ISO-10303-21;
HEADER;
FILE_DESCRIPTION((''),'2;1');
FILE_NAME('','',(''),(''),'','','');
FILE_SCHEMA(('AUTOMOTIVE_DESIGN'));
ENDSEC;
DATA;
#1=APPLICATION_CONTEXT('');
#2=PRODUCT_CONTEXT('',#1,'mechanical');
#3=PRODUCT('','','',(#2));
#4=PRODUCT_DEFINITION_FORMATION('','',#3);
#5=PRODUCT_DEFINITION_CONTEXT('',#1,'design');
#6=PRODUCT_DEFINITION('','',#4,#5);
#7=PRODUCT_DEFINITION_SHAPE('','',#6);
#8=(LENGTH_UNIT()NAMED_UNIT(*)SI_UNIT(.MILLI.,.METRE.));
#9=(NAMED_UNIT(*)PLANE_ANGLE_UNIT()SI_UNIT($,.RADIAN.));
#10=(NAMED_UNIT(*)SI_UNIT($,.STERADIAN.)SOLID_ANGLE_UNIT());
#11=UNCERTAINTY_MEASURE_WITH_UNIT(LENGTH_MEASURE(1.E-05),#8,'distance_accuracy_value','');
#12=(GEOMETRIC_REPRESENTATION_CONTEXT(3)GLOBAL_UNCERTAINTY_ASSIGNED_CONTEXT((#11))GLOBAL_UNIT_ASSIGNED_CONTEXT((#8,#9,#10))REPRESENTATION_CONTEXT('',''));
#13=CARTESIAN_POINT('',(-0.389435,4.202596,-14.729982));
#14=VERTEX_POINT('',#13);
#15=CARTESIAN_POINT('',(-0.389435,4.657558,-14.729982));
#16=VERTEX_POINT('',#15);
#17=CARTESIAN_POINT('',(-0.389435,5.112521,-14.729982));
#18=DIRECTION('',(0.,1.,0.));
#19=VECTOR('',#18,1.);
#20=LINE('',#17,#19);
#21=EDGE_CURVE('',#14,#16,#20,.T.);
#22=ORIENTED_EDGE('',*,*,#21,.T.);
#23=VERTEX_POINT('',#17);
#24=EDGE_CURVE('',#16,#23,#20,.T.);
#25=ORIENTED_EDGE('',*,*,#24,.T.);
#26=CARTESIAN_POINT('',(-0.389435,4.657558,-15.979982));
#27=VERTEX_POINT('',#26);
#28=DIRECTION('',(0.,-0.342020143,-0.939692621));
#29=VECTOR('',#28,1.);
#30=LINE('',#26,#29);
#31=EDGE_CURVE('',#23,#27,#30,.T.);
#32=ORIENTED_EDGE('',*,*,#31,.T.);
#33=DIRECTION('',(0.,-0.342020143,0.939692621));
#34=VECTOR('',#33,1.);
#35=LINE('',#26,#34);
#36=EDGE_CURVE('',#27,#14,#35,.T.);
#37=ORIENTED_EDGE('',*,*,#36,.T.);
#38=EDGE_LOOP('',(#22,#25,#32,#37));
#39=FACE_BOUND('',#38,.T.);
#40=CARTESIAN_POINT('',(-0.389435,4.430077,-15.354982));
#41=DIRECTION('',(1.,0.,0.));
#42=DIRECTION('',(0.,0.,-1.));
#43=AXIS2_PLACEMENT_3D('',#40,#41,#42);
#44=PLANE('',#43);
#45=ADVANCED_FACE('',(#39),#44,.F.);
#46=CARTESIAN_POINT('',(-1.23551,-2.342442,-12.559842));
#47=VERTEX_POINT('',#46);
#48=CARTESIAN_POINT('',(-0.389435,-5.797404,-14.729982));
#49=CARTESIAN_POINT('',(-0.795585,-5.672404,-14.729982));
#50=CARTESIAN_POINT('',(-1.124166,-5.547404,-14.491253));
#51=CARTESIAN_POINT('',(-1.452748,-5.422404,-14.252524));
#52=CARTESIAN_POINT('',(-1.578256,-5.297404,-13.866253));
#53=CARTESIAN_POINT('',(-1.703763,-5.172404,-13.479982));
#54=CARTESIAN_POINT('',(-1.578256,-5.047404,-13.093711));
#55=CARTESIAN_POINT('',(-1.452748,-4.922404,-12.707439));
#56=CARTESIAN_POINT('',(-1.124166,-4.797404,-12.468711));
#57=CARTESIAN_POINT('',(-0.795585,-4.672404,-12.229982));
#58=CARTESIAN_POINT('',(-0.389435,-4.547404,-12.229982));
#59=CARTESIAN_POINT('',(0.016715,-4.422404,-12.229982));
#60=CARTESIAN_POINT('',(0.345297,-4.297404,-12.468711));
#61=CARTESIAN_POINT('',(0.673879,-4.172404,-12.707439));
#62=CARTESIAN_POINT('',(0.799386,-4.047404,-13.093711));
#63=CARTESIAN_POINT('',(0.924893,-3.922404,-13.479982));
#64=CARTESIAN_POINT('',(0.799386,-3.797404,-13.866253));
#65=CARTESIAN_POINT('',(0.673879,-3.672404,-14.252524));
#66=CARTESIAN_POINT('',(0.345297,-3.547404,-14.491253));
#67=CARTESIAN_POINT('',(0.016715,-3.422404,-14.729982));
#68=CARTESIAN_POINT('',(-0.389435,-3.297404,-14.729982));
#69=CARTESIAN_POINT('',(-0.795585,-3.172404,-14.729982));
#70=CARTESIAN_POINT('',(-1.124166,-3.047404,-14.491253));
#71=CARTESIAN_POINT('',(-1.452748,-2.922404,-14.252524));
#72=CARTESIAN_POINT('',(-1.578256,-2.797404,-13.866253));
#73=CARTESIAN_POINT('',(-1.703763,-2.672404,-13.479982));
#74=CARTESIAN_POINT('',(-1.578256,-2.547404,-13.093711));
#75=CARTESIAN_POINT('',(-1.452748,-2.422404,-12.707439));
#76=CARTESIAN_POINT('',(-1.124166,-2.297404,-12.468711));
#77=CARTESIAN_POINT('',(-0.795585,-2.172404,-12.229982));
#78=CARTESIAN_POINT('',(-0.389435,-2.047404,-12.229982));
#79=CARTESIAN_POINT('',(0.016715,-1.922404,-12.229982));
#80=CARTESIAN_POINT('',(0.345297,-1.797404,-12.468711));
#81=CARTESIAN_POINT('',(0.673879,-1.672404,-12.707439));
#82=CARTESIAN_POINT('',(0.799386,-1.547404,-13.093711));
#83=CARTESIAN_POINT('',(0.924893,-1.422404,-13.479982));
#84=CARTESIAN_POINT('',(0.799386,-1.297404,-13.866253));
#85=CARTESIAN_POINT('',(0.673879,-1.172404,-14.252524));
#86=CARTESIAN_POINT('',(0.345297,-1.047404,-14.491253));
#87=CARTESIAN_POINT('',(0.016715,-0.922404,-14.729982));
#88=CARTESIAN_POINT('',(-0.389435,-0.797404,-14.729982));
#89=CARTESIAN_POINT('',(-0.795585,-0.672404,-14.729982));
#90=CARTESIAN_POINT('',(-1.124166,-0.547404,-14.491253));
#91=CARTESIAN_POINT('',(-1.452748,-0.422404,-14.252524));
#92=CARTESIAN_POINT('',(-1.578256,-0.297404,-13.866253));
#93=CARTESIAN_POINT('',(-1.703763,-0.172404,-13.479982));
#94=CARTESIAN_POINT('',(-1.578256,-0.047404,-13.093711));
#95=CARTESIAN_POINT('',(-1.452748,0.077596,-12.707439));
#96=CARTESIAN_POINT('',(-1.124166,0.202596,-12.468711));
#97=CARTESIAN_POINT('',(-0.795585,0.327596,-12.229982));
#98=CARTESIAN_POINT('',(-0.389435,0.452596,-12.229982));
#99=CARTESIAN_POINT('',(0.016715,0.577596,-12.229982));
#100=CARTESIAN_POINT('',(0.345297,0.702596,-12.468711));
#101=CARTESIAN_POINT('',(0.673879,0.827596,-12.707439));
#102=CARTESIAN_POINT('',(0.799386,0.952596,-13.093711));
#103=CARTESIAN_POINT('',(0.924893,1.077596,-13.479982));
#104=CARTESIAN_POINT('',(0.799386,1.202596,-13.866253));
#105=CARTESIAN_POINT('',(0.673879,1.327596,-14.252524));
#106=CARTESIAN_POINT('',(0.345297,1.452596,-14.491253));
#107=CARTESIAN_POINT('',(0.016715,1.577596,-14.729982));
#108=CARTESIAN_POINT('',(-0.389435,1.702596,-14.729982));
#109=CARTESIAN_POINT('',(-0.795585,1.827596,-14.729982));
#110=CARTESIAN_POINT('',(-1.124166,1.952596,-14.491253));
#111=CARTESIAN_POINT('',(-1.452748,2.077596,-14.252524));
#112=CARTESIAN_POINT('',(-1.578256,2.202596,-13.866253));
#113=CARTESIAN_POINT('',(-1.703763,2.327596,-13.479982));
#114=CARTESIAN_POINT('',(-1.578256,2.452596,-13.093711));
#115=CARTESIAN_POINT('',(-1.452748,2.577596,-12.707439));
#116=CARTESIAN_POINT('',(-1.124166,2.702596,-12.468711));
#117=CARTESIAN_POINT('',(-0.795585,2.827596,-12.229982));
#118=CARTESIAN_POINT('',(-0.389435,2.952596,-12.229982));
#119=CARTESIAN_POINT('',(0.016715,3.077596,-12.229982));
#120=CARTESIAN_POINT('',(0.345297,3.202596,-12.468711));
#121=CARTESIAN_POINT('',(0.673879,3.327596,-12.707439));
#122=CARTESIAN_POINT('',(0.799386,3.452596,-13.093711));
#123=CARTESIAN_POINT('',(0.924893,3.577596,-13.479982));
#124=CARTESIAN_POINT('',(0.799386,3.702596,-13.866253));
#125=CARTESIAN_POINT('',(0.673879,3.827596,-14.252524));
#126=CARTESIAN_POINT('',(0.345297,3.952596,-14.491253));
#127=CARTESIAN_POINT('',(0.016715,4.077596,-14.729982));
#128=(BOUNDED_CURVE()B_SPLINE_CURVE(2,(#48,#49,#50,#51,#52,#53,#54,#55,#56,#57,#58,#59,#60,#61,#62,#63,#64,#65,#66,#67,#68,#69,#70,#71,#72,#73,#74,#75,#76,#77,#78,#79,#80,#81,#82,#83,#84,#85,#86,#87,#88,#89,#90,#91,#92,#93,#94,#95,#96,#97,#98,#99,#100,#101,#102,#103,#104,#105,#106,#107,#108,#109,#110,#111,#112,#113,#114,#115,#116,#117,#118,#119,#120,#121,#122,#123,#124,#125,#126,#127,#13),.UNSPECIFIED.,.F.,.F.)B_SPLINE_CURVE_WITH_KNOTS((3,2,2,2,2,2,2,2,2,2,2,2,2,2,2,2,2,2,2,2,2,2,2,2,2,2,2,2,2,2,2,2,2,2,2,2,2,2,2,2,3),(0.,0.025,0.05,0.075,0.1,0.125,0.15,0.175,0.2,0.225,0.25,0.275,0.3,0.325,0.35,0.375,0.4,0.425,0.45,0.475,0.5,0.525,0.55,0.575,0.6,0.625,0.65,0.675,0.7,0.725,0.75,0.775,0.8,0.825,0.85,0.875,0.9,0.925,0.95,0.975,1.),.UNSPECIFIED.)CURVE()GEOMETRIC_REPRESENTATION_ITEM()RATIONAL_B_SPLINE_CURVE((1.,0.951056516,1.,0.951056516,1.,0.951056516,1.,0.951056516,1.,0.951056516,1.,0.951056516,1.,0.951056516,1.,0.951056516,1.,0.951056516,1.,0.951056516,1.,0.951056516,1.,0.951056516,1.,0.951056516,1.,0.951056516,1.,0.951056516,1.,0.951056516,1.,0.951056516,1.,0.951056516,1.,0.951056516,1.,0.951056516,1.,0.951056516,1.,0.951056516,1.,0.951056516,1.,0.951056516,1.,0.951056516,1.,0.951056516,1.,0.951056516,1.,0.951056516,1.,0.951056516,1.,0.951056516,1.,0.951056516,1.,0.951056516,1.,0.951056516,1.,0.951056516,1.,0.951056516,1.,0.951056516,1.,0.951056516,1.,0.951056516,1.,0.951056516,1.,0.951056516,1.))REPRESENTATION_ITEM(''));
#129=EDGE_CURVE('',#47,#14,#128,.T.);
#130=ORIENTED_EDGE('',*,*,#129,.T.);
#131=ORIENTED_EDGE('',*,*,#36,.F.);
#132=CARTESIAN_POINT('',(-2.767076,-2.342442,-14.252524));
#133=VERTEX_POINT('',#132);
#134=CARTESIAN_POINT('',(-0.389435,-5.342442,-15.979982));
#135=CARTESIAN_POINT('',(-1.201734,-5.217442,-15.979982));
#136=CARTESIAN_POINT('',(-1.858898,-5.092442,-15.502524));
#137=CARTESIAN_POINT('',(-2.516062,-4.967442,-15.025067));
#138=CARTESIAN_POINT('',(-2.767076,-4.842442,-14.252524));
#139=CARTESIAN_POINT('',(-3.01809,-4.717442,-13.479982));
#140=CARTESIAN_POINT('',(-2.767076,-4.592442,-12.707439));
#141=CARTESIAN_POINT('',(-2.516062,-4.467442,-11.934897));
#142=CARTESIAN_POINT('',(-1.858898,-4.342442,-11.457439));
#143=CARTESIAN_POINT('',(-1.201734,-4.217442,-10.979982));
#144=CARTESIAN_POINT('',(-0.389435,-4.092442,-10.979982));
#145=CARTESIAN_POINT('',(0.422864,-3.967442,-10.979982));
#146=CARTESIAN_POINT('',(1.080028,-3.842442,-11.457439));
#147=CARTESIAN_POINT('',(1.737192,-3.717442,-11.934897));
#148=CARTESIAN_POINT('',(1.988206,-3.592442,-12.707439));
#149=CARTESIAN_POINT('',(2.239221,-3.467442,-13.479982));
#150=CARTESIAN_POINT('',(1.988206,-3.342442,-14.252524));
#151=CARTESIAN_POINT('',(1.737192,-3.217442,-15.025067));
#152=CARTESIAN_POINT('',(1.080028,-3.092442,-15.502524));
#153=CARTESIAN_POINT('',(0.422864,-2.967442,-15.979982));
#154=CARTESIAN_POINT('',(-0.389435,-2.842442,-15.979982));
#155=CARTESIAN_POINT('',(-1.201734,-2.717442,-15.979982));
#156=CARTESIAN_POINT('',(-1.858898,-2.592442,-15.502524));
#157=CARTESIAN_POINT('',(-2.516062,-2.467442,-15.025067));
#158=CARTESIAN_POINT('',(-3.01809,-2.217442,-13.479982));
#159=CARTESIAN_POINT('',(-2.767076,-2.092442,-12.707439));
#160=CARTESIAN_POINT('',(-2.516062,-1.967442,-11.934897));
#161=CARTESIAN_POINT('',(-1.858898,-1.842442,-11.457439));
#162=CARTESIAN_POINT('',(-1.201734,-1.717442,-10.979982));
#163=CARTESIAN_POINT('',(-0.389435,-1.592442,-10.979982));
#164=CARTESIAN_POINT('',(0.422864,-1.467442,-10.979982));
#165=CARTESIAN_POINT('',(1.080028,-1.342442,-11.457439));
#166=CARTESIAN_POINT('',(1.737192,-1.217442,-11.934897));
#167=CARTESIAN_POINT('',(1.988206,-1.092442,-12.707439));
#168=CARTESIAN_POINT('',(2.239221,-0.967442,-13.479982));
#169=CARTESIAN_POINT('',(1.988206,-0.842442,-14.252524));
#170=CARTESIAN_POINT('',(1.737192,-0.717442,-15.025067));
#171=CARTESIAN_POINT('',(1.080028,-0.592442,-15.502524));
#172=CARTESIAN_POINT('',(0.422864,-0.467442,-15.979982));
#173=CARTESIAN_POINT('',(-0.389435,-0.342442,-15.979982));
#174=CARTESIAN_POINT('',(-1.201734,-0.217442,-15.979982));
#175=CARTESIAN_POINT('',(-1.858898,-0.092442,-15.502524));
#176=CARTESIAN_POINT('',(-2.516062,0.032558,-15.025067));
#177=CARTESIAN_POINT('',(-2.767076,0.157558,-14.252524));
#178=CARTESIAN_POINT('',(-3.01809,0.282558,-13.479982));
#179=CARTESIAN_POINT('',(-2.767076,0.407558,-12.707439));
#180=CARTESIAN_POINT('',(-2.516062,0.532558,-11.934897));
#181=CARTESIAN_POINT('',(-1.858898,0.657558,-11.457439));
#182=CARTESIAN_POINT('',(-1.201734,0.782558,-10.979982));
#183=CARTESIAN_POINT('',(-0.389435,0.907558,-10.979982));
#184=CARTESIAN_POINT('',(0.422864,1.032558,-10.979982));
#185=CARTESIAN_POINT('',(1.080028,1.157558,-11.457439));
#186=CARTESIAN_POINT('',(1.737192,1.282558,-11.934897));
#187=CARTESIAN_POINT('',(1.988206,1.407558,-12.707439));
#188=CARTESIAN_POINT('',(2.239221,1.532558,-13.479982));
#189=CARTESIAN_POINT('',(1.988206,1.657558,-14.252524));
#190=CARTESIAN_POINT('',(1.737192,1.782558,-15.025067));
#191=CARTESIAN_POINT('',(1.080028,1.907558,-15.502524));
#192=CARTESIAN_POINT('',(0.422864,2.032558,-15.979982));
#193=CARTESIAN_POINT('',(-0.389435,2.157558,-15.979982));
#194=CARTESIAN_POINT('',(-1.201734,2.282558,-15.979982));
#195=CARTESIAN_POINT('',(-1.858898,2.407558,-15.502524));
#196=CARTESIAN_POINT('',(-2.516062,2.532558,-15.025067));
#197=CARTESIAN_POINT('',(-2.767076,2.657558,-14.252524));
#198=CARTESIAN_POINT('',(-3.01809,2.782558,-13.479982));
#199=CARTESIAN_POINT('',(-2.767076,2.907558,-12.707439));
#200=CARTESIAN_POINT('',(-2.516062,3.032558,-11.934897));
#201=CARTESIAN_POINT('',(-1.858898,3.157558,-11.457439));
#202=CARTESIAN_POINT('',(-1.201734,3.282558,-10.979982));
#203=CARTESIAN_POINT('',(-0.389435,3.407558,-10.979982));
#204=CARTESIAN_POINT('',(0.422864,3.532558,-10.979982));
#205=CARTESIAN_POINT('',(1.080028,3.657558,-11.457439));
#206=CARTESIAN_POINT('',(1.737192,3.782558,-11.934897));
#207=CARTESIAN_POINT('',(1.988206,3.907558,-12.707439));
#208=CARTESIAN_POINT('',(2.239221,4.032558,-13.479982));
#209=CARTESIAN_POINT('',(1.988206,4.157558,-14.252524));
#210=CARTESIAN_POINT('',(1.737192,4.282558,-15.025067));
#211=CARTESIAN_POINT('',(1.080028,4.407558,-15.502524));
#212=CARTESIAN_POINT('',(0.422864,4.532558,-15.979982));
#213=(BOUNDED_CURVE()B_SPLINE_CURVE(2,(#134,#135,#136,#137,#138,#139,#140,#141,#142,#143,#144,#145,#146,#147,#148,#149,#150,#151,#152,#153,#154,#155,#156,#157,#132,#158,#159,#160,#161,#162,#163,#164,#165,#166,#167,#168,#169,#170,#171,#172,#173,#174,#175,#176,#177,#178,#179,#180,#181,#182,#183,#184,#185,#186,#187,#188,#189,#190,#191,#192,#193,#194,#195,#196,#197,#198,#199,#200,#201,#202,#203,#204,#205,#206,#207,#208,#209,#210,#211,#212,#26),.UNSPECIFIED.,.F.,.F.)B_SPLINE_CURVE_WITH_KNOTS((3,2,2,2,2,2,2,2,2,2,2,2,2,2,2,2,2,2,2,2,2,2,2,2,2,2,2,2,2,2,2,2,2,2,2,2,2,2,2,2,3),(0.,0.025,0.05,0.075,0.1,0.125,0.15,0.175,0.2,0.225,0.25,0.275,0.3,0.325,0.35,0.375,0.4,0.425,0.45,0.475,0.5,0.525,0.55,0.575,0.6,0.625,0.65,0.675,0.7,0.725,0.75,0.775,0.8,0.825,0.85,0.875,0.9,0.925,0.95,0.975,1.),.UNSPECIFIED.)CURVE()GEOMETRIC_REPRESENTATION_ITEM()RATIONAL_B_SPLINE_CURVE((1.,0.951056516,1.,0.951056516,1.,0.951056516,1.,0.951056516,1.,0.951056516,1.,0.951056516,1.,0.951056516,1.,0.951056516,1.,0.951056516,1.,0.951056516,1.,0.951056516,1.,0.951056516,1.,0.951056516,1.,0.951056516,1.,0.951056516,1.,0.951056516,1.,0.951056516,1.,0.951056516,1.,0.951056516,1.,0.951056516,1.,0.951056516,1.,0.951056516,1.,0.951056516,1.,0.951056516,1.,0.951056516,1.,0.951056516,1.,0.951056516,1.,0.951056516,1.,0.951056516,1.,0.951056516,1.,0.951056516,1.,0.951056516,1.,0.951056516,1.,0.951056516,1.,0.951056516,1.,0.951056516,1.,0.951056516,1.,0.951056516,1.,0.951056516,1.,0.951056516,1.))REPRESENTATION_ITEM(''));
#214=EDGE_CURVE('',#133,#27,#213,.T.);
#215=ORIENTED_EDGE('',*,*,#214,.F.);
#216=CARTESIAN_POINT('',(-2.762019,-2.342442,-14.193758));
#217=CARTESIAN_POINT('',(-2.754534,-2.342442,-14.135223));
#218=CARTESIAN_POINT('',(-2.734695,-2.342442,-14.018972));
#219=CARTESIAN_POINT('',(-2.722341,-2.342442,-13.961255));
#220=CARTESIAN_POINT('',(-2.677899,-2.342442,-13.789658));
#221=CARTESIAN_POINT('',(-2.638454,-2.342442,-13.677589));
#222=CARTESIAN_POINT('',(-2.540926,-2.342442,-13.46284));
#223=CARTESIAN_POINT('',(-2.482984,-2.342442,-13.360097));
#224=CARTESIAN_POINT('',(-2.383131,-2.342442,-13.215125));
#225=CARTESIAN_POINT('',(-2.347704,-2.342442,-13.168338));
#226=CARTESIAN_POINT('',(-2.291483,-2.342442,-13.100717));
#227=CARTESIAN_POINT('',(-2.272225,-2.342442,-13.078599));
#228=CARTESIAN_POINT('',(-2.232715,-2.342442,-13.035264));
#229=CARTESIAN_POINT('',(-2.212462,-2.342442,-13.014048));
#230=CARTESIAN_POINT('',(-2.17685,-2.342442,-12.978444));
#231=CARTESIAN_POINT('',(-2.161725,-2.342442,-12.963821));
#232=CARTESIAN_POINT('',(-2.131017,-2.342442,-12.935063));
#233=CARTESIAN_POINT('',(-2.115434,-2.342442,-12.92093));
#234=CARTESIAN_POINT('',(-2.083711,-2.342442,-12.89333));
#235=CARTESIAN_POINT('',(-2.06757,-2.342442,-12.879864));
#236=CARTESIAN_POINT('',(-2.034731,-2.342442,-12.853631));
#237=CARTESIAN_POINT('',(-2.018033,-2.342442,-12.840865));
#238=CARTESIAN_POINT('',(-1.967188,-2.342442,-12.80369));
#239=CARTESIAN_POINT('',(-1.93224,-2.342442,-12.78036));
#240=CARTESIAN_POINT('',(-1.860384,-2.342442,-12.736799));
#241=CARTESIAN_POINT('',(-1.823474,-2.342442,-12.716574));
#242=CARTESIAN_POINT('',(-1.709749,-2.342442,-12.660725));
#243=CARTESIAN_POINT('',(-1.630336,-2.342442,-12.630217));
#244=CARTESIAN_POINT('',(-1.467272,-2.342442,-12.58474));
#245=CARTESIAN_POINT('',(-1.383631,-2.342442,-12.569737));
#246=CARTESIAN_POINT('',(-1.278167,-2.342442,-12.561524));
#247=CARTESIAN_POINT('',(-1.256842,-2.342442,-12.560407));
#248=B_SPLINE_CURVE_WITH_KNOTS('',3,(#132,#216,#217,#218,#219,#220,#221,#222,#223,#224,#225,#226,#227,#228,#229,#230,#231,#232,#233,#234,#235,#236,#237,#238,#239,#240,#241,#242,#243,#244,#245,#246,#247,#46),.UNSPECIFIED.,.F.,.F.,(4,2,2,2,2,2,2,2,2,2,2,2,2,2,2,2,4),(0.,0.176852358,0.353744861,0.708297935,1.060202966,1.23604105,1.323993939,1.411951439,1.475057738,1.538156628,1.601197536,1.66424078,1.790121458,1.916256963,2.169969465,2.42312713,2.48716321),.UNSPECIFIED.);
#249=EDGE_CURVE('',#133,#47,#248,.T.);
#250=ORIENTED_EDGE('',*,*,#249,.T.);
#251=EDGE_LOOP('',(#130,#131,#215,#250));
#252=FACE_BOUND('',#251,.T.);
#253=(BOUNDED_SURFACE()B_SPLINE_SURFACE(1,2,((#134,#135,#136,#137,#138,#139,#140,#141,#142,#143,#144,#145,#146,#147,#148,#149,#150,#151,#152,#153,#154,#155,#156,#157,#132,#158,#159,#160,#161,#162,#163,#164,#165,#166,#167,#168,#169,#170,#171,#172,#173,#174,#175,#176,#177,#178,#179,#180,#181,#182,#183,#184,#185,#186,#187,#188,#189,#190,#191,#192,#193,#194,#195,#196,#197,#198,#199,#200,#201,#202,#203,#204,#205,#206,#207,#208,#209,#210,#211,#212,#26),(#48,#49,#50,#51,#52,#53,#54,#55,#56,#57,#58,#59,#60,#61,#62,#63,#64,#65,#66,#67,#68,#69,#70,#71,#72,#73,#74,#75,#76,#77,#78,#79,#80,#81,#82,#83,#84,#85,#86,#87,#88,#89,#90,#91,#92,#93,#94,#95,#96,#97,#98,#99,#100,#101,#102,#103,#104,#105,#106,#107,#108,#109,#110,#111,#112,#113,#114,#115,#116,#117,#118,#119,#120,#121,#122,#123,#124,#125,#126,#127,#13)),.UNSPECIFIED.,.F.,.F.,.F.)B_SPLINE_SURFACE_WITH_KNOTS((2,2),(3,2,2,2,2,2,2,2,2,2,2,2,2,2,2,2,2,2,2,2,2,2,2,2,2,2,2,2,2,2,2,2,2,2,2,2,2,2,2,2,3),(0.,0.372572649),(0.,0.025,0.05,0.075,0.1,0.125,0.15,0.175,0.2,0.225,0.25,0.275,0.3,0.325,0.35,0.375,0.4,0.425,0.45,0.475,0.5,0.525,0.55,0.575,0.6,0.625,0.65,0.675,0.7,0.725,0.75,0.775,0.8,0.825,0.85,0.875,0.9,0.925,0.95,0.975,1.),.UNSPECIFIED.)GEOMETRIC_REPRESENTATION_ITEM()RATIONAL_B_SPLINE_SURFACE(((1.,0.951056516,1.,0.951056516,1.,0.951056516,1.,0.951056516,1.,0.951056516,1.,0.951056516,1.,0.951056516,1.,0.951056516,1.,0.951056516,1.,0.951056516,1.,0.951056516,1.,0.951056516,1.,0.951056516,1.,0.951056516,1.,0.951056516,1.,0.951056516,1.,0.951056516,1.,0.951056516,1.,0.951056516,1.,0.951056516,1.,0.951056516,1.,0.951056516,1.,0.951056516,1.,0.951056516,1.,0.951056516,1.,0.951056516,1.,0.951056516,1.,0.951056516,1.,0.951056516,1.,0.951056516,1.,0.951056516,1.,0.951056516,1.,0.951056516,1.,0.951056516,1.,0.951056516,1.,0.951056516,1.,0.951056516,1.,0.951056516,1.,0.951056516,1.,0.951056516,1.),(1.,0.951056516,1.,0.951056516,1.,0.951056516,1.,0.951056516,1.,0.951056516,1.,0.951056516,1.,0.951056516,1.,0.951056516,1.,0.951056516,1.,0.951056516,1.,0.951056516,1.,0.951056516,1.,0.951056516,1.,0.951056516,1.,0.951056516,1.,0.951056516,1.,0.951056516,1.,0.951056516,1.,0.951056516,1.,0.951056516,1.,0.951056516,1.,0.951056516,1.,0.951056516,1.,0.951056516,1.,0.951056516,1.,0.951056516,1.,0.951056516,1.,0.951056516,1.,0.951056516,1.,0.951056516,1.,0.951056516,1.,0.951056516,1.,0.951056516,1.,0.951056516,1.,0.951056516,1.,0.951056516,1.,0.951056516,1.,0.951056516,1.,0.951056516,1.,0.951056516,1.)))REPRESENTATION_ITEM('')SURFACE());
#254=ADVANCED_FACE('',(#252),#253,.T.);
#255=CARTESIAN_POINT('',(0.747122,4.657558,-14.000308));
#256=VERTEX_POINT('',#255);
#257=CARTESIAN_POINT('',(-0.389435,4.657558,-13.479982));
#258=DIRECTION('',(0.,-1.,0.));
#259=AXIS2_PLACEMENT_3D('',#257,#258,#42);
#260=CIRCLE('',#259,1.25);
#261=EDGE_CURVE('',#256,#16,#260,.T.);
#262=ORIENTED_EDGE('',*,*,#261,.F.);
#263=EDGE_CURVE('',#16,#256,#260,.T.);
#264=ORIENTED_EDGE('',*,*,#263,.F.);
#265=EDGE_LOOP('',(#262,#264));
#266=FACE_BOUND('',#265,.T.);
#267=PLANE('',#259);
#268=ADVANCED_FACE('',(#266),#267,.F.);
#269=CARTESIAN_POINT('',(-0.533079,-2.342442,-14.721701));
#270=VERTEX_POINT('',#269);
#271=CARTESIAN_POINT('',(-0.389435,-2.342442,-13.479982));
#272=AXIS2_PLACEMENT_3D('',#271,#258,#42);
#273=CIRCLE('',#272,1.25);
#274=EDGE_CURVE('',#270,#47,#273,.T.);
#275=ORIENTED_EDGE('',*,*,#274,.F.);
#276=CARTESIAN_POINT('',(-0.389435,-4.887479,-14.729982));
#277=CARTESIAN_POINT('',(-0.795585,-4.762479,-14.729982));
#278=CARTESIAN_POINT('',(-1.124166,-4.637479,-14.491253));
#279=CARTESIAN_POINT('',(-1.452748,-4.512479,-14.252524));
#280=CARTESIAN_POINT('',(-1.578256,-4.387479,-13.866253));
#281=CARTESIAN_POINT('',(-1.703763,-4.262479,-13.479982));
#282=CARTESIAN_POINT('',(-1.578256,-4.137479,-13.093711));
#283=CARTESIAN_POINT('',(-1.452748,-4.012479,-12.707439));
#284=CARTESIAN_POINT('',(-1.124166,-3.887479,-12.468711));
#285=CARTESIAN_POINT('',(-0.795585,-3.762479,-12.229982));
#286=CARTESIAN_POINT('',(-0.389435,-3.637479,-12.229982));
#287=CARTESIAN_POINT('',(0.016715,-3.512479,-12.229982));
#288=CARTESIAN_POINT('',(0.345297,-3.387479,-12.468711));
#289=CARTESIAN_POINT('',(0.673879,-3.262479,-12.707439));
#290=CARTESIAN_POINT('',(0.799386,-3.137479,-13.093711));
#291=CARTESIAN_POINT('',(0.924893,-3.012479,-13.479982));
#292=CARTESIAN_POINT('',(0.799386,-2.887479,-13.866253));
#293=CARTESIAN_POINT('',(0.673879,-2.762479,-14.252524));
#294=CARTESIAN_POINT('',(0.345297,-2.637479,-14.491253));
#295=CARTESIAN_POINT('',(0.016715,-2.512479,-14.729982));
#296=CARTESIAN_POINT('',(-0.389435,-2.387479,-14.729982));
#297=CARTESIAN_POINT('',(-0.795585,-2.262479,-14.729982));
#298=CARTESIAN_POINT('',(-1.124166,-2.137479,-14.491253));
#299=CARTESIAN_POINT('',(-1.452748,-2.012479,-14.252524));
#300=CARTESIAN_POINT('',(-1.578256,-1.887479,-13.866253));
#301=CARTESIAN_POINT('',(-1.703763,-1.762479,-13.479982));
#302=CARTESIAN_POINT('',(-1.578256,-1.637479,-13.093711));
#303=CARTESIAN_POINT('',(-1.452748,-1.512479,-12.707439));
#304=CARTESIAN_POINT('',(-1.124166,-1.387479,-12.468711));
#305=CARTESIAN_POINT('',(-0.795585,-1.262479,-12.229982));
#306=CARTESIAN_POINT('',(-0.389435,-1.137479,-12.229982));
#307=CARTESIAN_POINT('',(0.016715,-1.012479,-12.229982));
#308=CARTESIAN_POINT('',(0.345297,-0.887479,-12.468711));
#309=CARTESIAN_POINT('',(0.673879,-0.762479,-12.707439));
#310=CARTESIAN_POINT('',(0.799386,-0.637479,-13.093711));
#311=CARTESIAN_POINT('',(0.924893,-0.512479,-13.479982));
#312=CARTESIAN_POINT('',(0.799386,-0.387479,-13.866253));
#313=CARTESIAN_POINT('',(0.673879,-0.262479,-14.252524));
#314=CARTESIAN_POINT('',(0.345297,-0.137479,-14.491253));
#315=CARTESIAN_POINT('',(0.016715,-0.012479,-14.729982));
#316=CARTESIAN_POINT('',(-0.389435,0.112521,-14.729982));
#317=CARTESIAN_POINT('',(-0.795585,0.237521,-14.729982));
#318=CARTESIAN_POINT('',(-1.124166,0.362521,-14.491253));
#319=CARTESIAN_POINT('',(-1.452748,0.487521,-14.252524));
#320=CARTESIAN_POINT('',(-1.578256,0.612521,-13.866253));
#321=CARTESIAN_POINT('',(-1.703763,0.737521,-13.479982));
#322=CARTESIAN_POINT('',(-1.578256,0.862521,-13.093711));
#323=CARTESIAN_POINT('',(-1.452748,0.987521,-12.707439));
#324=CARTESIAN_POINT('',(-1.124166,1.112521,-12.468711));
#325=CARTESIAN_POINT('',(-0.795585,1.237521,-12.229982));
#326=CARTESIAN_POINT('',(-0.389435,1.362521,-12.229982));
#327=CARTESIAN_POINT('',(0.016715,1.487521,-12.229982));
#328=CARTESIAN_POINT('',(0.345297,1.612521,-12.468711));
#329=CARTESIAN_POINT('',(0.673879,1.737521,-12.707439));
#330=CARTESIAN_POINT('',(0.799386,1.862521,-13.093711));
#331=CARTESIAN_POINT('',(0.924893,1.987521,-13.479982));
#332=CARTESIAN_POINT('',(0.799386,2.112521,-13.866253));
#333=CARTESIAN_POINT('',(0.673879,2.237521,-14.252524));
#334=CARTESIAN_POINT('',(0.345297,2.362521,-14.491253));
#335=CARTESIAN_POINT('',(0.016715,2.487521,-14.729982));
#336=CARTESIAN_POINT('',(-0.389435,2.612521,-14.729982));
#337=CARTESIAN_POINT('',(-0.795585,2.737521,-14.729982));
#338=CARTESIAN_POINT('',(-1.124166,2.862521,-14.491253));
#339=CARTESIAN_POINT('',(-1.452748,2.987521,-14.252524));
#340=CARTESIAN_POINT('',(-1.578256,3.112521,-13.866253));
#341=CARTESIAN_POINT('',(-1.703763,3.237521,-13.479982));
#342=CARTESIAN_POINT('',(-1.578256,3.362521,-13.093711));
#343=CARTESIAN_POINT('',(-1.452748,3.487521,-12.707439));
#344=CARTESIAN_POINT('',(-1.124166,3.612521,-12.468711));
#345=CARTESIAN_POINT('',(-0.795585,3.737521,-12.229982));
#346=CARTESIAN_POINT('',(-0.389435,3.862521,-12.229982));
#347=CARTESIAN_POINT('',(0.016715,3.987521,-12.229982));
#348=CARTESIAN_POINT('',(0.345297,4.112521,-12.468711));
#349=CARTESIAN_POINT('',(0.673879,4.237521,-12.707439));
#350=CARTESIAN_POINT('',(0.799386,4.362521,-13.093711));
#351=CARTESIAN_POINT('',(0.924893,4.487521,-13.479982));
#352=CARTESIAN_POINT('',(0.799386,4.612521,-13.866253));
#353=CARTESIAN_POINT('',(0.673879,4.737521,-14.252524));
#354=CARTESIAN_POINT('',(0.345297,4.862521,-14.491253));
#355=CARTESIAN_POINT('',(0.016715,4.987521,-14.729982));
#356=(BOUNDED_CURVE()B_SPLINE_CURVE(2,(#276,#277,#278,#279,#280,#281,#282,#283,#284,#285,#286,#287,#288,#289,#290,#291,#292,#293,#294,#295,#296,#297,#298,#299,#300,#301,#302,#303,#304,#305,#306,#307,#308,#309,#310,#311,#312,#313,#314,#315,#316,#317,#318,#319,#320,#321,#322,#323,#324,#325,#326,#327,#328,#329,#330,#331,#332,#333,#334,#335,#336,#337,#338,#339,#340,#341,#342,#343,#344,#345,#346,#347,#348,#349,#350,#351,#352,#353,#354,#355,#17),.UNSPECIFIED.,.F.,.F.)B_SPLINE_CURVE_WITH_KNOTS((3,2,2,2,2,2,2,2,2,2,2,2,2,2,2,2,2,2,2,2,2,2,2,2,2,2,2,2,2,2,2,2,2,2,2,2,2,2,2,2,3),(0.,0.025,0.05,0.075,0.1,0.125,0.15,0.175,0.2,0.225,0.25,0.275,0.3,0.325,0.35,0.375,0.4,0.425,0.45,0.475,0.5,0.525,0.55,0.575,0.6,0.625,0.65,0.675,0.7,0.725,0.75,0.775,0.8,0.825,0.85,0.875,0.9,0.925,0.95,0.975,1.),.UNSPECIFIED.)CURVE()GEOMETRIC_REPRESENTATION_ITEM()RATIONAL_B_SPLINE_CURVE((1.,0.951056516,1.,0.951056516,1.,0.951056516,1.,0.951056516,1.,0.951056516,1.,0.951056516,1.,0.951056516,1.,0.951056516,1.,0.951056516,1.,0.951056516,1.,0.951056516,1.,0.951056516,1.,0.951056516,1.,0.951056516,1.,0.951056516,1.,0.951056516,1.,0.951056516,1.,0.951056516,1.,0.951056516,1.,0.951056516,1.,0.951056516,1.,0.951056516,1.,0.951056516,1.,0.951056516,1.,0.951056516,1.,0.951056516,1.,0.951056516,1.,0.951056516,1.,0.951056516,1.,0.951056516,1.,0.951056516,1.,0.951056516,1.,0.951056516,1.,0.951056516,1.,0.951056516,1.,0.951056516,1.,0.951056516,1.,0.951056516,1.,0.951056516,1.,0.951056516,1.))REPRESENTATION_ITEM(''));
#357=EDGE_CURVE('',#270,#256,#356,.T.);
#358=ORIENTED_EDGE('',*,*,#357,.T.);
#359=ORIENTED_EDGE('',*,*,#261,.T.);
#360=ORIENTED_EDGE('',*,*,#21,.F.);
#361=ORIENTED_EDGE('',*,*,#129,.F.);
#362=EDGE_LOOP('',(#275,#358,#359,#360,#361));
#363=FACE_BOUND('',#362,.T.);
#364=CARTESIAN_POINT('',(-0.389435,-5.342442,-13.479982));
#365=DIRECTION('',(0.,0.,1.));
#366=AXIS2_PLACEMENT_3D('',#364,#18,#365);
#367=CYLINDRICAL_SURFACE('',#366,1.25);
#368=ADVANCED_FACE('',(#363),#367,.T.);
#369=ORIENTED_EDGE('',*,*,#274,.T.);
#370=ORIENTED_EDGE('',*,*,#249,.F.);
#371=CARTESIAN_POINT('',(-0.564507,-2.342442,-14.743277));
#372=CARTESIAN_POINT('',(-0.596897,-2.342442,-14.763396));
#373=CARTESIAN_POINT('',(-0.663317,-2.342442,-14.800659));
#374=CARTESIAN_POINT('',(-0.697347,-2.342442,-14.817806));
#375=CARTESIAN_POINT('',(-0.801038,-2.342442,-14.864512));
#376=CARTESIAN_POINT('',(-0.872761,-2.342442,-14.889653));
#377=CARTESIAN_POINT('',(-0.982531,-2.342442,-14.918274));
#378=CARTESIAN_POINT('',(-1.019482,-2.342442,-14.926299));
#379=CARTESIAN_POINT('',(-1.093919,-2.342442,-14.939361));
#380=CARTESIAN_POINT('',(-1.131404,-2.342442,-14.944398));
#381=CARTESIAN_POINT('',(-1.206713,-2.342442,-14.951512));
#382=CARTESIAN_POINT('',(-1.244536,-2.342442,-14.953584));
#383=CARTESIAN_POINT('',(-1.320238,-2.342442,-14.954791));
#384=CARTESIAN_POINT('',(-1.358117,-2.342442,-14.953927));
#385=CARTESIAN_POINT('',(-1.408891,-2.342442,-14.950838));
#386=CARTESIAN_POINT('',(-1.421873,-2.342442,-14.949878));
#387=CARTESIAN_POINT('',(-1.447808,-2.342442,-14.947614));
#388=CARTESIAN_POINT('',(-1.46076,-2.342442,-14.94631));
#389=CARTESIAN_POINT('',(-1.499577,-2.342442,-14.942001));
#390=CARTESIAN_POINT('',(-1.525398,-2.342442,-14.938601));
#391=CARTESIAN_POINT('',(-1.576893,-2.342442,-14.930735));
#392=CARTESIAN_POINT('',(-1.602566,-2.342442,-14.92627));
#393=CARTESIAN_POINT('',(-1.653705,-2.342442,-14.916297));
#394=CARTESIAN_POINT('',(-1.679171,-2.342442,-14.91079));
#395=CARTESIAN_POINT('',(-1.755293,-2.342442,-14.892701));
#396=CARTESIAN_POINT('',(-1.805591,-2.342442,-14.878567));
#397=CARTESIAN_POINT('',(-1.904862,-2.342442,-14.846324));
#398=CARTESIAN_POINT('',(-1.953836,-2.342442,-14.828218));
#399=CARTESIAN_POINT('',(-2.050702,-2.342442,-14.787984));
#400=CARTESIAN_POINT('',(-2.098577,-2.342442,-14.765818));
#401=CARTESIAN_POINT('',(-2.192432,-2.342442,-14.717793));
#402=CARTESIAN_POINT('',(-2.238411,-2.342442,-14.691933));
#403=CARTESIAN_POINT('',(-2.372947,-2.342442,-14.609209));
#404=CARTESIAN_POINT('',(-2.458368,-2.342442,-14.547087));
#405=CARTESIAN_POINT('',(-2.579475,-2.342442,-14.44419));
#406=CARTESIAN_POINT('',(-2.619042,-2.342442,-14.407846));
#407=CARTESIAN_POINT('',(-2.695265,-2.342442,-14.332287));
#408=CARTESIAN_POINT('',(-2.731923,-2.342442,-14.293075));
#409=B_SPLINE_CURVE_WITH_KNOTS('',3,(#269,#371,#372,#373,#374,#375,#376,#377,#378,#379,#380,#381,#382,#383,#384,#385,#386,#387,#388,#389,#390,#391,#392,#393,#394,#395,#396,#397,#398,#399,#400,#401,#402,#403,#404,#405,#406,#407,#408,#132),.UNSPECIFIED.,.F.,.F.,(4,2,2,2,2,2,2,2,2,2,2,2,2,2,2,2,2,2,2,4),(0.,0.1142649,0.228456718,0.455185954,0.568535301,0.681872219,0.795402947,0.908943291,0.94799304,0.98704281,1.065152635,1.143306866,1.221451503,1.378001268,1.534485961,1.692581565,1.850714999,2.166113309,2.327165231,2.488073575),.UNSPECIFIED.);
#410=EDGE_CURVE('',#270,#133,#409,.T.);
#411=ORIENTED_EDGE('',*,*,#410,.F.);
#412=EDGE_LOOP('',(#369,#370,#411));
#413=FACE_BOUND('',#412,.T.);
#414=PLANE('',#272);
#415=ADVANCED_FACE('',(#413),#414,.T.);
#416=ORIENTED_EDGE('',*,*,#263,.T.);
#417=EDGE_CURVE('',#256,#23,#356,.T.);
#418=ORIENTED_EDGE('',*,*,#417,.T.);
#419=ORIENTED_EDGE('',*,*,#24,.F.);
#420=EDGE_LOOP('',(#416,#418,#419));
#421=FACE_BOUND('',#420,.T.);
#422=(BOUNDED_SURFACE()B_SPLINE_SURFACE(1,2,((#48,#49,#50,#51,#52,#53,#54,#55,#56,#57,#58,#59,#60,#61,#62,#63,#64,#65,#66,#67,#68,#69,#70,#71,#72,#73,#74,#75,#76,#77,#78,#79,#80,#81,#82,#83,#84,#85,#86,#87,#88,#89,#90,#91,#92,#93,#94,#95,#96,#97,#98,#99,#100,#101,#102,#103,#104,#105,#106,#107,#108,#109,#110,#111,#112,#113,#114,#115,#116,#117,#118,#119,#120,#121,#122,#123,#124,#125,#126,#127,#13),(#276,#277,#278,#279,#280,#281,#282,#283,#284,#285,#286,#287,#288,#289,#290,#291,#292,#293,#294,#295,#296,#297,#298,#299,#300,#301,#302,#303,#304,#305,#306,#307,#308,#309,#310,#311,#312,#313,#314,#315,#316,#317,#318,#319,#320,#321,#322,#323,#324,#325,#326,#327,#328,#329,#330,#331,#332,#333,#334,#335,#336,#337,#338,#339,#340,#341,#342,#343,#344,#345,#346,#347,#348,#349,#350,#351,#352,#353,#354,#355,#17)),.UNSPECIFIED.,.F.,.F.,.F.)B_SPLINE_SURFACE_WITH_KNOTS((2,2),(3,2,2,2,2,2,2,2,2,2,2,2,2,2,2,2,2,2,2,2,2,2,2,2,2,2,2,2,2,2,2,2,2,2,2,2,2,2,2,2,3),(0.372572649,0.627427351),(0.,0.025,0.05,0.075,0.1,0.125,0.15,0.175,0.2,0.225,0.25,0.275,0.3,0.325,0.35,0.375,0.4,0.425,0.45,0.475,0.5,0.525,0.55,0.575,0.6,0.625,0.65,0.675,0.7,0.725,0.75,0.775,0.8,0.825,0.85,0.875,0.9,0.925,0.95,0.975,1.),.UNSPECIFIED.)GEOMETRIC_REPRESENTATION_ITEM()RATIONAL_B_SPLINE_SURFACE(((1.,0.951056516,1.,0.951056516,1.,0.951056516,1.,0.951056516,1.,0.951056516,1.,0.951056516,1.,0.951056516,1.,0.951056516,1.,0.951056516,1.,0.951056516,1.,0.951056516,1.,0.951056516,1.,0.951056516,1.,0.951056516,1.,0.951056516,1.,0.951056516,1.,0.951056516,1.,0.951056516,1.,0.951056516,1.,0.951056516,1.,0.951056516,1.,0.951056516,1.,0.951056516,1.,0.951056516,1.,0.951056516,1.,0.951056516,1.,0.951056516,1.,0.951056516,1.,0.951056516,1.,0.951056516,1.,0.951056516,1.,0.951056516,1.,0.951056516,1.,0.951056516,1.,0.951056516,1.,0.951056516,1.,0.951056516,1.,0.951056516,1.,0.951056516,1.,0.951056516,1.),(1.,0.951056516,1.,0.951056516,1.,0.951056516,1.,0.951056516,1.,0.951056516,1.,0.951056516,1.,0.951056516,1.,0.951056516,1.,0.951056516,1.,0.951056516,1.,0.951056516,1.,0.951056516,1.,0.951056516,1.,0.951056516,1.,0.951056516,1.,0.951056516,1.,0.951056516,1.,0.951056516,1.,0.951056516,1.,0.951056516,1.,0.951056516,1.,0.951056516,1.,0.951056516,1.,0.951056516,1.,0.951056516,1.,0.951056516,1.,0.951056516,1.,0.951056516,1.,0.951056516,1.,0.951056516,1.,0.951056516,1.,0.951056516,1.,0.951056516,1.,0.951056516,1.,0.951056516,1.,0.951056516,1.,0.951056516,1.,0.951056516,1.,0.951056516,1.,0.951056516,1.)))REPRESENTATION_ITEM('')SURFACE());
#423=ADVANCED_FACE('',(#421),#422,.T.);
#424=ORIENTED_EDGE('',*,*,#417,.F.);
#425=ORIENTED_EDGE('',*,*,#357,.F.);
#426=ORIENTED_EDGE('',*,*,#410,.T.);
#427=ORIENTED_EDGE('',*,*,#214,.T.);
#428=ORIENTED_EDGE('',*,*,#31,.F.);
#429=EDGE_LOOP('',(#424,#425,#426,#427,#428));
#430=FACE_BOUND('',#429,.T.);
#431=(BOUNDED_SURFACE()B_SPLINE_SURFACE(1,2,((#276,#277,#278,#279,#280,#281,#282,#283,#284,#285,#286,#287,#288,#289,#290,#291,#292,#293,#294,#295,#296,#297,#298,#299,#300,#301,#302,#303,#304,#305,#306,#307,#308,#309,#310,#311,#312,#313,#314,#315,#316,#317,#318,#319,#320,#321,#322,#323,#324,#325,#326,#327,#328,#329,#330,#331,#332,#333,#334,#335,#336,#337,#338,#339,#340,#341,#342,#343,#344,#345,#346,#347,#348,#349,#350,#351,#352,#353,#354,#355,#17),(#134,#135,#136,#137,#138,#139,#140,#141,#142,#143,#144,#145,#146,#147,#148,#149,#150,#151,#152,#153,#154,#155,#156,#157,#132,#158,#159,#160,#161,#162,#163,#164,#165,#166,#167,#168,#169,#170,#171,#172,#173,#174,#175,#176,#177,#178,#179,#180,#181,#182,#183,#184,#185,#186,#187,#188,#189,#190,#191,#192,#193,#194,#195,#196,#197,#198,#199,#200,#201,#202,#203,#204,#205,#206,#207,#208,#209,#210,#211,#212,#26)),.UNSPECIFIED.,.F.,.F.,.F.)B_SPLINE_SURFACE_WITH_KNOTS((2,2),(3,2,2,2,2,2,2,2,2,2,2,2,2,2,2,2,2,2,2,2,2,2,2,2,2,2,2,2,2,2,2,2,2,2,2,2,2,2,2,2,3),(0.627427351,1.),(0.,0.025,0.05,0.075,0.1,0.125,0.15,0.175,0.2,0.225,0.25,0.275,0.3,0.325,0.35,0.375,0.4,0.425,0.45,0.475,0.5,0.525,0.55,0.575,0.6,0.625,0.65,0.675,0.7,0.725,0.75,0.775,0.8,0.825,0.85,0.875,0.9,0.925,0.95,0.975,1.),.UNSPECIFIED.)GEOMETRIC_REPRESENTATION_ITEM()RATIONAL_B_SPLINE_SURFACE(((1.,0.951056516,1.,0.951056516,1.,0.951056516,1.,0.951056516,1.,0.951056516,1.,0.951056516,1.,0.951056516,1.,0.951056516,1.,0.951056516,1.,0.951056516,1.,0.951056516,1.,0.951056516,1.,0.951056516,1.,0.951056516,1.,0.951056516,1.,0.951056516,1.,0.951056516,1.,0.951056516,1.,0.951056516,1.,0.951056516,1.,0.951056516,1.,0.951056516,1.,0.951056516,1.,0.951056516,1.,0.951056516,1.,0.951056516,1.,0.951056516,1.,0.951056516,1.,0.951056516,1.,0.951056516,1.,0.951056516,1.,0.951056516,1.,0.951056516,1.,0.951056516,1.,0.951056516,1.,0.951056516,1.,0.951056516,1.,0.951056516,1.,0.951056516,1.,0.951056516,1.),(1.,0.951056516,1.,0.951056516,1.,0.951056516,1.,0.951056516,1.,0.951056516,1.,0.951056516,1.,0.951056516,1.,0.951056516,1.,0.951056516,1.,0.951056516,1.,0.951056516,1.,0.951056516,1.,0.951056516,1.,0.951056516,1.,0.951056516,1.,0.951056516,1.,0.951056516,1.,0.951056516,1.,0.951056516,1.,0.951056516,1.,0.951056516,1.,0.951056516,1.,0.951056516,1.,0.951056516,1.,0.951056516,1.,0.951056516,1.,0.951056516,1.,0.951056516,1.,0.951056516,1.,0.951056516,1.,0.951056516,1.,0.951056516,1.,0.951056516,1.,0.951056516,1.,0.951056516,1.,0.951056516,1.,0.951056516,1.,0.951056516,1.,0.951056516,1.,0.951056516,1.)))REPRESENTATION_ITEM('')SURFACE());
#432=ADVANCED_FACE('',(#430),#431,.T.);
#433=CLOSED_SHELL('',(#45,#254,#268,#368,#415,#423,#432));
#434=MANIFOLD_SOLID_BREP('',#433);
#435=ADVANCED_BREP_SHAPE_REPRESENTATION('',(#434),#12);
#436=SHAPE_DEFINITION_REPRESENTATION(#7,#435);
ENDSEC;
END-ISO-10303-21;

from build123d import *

# Parameters (mm, degrees)
ESQUISSE2_R           = 1.25
EXTRUSION1_DEPTH      = 10
BALAYAGE1_PITCH       = 2.5
EXTRUSION2_DEPTH      = 20.313652943
EXTRUSION2_DEPTH_BACK = 3
ESQUISSE5_R           = 3.615449726


with BuildPart() as part:
    # Esquisse2 → Extrusion1 (new body)
    with BuildSketch(Plane.XZ.offset(-4.657558322)):
        with Locations(Location((-0.389434894, -13.47998185, 0), (0, 0, 270))):
            Circle(ESQUISSE2_R)
    extrude(amount=EXTRUSION1_DEPTH)

    # Balayage1: the profile of Esquisse4 profile screwed along a right-hand helix of 4 turns, 10 arcs to a turn; built about Z, then put on its axis
    balayage1_z = Axis((0, 0, 0), (0, 0, 1))
    balayage1_corners = [(2.5, 0, 0), (1.2497, 0, 0.455071984), (1.2497, 0, -0.455071984)]
    with BuildLine(mode=Mode.PRIVATE) as balayage1_profile:
        Line(balayage1_corners[0], balayage1_corners[1])
        Line(balayage1_corners[1], balayage1_corners[2])
        Line(balayage1_corners[2], balayage1_corners[0])
    balayage1_cap = Face(balayage1_profile.wire())
    balayage1_turn_angles = [0, 18, 36, 54, 72, 90, 108, 126, 144, 162, 180, 198, 216, 234, 252, 270, 288, 306, 324, 342, 360]
    balayage1_turn_weights = [1, 0.9510565162951535, 1, 0.9510565162951535, 1, 0.9510565162951535, 1, 0.9510565162951535, 1, 0.9510565162951535, 1, 0.9510565162951535, 1, 0.9510565162951535, 1, 0.9510565162951535, 1, 0.9510565162951535, 1, 0.9510565162951535, 1]
    balayage1_turn_rails = [Edge.make_bspline([Vector(p[0], p[1], 0).rotate(balayage1_z, balayage1_turn_angles[k]) / balayage1_turn_weights[k] + Vector(0, 0, p[2] + BALAYAGE1_PITCH * balayage1_turn_angles[k] / 360) for k in range(21)], [0, 0, 0, 1, 1, 2, 2, 3, 3, 4, 4, 5, 5, 6, 6, 7, 7, 8, 8, 9, 9, 10, 10, 10], 2, balayage1_turn_weights) for p in balayage1_corners]
    balayage1_turn_sides = [Face.make_surface_from_curves(balayage1_turn_rails[p[0]], balayage1_turn_rails[p[1]]) for p in [(0, 1), (1, 2), (2, 0)]]
    balayage1 = Plane(origin=(-0.389434894, -5.342441678, -13.47998185), x_dir=(0, 0, -1), z_dir=(0, 1, 0)) * Solid(Shell([*[p.moved(Location((0, 0, BALAYAGE1_PITCH * i))) for i in range(4) for p in balayage1_turn_sides], balayage1_cap, balayage1_cap.rotate(balayage1_z, 1440).moved(Location((0, 0, BALAYAGE1_PITCH * 1440 / 360)))]))
    add(balayage1)

    # Esquisse5 → Extrusion2 (cut, two sides: drawn at the far end of the back side and taken through both)
    with BuildSketch(Plane.XZ.offset(5.342441678).offset(-EXTRUSION2_DEPTH_BACK)):
        with Locations((-0.389434894, -13.47998185)):
            Circle(ESQUISSE5_R)
    extrude(amount=EXTRUSION2_DEPTH + EXTRUSION2_DEPTH_BACK, mode=Mode.SUBTRACT)


solid = part.part
